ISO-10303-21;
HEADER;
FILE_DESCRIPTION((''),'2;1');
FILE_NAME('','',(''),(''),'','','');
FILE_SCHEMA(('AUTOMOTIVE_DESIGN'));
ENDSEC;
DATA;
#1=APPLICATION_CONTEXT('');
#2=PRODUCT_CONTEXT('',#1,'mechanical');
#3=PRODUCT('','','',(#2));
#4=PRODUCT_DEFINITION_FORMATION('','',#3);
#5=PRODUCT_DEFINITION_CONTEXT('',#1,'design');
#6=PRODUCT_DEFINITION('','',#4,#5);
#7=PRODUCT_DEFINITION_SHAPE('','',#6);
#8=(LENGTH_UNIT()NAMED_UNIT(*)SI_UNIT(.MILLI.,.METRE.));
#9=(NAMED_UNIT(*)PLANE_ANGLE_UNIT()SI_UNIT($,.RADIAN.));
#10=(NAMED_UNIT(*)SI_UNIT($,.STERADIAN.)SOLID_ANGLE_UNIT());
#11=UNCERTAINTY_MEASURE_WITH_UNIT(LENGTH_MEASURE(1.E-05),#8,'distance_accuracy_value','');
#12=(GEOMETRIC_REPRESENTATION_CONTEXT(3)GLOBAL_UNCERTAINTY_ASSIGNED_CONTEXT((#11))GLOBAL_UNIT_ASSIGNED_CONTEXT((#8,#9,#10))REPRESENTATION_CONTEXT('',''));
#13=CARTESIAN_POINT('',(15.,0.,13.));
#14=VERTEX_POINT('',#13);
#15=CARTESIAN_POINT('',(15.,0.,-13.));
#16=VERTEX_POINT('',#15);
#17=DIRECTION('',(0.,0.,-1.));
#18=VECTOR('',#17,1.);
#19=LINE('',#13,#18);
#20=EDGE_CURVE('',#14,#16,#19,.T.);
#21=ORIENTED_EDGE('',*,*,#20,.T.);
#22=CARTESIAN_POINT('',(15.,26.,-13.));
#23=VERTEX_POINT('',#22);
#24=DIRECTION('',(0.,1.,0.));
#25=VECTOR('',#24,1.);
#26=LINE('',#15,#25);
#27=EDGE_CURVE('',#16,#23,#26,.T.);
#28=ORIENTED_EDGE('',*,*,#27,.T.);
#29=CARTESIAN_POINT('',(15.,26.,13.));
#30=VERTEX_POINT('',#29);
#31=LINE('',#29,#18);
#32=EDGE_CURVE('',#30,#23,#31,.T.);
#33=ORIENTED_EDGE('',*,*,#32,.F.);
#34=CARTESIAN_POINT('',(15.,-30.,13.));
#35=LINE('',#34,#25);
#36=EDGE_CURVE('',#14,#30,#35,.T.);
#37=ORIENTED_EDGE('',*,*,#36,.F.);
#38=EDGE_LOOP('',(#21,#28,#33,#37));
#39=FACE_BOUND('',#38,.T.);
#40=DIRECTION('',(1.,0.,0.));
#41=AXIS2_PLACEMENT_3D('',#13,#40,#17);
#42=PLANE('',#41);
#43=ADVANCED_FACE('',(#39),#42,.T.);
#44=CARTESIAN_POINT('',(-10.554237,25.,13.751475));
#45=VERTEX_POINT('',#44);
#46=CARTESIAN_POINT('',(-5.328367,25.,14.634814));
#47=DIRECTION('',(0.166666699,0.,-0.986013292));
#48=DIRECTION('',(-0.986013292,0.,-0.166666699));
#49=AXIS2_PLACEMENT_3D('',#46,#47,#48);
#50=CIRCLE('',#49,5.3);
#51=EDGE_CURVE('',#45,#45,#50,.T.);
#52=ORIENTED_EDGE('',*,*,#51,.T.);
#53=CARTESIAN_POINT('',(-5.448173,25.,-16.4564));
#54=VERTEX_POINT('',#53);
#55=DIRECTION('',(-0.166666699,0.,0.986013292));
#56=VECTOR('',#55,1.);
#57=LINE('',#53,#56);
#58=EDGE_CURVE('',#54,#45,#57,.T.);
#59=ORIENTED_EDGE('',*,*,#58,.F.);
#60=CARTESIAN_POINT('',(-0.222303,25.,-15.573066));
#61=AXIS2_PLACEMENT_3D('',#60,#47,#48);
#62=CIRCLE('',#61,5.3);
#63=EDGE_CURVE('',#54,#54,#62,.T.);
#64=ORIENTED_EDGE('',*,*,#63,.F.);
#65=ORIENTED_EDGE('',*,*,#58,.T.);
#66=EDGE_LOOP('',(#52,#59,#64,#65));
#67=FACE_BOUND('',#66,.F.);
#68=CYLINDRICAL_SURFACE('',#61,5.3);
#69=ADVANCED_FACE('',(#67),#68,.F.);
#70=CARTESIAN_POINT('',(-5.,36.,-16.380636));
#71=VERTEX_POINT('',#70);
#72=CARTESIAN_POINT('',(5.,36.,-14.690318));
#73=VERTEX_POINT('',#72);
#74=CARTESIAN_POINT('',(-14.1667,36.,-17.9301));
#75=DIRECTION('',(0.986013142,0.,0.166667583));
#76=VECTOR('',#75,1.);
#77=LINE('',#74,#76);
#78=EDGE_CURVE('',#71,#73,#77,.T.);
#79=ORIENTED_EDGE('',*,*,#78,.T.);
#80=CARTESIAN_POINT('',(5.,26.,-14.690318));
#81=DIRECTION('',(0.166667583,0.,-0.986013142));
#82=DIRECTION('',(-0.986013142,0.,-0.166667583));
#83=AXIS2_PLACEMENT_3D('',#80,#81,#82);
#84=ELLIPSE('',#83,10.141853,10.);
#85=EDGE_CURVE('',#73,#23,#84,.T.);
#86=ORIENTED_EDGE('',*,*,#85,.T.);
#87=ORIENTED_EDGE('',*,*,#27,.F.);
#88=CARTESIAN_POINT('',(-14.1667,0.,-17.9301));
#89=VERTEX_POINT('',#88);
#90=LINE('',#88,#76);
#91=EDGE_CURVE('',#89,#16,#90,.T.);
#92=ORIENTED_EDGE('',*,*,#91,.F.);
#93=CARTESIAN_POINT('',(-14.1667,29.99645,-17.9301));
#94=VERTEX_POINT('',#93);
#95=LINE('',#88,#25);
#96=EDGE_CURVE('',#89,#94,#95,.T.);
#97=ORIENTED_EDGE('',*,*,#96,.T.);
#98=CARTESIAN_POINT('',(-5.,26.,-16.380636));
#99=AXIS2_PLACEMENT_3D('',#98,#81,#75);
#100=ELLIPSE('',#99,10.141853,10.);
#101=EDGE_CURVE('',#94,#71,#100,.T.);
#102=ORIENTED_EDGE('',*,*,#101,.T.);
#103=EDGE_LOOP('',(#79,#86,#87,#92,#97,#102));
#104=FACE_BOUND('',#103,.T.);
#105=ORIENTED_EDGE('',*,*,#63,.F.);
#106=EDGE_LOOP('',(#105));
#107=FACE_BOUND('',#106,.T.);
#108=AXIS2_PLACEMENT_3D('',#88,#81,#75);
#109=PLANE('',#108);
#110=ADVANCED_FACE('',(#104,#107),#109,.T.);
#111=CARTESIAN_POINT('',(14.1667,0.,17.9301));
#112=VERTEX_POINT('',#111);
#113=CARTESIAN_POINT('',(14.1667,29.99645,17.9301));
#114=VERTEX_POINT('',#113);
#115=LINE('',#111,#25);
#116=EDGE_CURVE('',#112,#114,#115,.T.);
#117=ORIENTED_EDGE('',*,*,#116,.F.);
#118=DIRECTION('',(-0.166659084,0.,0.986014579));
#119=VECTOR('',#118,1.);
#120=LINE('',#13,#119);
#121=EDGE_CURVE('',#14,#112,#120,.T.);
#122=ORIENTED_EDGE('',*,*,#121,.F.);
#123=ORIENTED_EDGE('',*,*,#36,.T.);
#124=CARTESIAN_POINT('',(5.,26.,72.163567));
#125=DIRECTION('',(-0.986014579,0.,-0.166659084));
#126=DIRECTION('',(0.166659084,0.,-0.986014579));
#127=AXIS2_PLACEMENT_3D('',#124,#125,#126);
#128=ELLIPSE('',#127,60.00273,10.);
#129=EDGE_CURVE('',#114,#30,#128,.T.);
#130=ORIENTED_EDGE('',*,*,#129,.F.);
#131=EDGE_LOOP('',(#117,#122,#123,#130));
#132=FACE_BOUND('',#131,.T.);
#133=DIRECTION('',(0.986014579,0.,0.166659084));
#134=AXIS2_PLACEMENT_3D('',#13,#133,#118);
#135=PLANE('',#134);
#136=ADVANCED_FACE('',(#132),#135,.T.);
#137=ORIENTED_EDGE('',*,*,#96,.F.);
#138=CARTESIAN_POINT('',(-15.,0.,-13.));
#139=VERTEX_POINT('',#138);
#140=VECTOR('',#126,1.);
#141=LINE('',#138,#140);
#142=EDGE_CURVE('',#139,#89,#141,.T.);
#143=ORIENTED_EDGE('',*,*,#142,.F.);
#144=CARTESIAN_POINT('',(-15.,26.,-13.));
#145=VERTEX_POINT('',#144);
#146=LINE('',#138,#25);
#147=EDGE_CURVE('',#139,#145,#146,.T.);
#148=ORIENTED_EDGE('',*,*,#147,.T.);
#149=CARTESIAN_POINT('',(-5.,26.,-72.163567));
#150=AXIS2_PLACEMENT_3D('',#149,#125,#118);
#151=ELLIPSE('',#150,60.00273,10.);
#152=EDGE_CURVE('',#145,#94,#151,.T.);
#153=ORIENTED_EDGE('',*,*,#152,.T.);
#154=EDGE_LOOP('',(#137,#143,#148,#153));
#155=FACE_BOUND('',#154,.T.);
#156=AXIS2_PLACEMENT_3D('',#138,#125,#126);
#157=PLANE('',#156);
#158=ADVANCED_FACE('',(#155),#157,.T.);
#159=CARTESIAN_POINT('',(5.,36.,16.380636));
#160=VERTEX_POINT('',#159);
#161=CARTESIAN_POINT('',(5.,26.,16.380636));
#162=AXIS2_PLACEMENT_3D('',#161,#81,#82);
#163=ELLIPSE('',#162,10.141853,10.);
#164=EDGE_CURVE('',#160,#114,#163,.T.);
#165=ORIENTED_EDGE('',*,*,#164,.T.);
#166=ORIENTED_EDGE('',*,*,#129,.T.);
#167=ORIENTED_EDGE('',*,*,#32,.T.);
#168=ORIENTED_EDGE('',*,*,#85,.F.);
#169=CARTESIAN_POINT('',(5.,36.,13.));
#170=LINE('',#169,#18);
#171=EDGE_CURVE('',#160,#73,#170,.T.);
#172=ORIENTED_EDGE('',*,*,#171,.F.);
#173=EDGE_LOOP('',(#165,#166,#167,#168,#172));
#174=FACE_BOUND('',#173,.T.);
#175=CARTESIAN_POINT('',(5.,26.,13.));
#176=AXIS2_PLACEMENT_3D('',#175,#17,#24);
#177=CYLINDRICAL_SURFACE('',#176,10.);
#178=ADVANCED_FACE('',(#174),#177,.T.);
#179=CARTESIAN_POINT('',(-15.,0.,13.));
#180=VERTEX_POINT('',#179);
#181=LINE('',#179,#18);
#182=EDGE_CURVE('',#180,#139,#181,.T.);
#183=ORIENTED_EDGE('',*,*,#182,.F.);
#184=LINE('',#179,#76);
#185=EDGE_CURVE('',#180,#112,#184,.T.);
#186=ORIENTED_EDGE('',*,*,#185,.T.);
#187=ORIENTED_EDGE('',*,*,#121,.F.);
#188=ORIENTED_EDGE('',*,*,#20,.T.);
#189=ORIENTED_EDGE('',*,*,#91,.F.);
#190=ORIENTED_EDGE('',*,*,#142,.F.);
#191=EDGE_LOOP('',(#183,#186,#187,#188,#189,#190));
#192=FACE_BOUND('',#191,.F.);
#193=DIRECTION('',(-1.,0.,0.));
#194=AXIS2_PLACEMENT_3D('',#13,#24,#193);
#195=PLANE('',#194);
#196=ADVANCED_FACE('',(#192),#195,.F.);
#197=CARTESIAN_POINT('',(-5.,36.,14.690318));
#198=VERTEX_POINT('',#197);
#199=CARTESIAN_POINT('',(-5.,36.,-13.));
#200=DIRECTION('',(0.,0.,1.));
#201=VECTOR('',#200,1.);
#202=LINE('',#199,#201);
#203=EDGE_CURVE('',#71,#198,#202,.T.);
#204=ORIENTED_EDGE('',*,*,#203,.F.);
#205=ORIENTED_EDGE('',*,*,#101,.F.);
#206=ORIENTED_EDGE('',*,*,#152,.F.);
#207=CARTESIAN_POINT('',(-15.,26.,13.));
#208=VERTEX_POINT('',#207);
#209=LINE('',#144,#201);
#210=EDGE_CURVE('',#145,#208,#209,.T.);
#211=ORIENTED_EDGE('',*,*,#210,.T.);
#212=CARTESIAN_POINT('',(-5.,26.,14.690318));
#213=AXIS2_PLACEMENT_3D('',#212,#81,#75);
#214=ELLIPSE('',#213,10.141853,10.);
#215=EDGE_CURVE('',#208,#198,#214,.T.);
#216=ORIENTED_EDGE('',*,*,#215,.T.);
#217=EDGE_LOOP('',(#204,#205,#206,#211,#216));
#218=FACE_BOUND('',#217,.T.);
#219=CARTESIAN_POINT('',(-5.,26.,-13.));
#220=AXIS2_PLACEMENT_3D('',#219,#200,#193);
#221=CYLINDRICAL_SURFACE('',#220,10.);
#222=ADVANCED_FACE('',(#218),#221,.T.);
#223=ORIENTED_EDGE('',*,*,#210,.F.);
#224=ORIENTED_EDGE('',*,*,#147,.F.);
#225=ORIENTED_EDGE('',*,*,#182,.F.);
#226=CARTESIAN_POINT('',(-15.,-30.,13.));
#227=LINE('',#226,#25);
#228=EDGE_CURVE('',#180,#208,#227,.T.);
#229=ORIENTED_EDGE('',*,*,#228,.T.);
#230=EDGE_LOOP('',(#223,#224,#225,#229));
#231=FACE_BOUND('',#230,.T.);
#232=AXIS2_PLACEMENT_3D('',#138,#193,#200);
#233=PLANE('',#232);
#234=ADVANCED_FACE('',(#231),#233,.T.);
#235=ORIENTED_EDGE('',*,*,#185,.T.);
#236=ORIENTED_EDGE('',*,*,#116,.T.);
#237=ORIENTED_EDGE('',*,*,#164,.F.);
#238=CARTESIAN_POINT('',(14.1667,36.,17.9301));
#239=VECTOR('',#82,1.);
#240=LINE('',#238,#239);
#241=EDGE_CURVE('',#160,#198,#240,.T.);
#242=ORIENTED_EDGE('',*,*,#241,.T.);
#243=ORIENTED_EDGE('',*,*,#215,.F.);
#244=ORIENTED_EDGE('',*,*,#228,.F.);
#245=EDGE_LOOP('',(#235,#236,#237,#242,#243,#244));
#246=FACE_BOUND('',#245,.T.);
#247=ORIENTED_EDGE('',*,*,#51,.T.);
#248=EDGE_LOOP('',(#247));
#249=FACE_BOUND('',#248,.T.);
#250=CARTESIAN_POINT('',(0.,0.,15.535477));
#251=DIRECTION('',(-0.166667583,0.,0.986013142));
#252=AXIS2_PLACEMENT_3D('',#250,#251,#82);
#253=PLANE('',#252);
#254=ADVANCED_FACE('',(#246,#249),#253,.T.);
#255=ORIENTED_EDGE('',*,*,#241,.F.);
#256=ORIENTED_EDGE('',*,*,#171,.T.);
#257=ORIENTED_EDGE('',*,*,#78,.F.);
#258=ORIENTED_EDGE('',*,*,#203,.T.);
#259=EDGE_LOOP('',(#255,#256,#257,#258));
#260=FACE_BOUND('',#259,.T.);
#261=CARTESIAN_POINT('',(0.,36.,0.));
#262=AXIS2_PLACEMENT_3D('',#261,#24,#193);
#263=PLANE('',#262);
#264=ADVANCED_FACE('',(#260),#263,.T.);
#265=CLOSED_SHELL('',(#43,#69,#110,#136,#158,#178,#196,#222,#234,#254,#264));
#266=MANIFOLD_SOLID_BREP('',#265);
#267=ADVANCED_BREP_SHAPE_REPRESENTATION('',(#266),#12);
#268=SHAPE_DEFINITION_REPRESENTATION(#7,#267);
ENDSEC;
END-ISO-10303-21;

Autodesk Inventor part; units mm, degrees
ref_plane "YZ Plane" through (0, 0, 0) normal (1, 0, 0) x (0, 1, 0)
ref_plane "XZ Plane" through (0, 0, 0) normal (0, 1, 0) x (-1, 0, 0)
ref_plane "XY Plane" through (0, 0, 0) normal (0, 0, 1) x (1, 0, 0)
sketch "BaseSC" plane through (0, 0, 0) normal (0, 1, 0) x (-1, 0, 0)
  line L0 (15, 13) -> (-15, 13)
  line L1 (-15, 13) -> (-15, -13)
  line L2 (-15, -13) -> (15, -13)
  line L3 (15, -13) -> (15, 13)
  line L4 (15, 13) -> (-15, -13) construction
  line L5 (-15, 13) -> (15, -13) construction
  line L6 (15, 13) -> (14.1667, 17.9301)
  line L7 (14.1667, 17.9301) -> (-15, 13)
  line L8 (0, 0) -> (8.3423, 0)
  line L9 (15, -13) -> (14.1667, -17.9301)
  line L10 (14.1667, -17.9301) -> (-15, -13)
  line L11 (-15, 13) -> (-14.1667, 17.9301)
  line L12 (-14.1667, 17.9301) -> (15, 13)
  dimension "d0" = 30
  dimension "d1" = 26
  dimension "d9" = 5
  dimension "d10" = 90
  dimension "d17" = 5
  dimension "d18" = 90
sketch "スケッチ2" plane through (0, 0, 0) normal (0, 0, 1) x (1, 0, 0)
  point P0 (0, 0)
extrude "押し出し1" add sketch "BaseSC" against normal blind 30 contours L3 L2 L1 L0
sketch "スケッチ3" plane through (15, 0, 13) normal (1, 0, 0) x (0, 0, -1)
  line L0 (2.5, -1.5742) -> (23.5, -1.5742)
  line L1 (23.5, -1.5742) -> (23.5, -28.5742)
  line L2 (23.5, -28.5742) -> (2.5, -28.5742)
  line L3 (2.5, -28.5742) -> (2.5, -1.5742)
  line L4 (2.5, -1.5742) -> (23.5, -28.5742) construction
  line L5 (23.5, -1.5742) -> (2.5, -28.5742) construction
  ellipse E0 centre (13, -15.0742) end of major axis (23.5, -15.0742) minor radius 13.5
  point P0 (13, 0)
  dimension "d5" = 21
  dimension "d6" = 27
extrude "押し出し2" cut sketch "スケッチ3" against normal through all contours E0
extrude "押し出し3" add sketch "BaseSC" along normal blind 36 contours L3 L2 L1 L0 | L9 L10 L2
extrude "押し出し5" add sketch "BaseSC" along normal blind 36 contours L0 L7 L12 | L11 L12 L7
sketch "スケッチ5" plane through (-14.1667, 0, -17.9301) normal (0.1666667, 0, -0.9860133) x (-0.9860133, 0, -0.1666667)
  circle A0 centre (-14.1422, 25) radius 5.3
  line L0 (-29.5804, 0) -> (0, 0) projected
  point P0 (-16.9569, 0)
  dimension "d21" = 10.6
  dimension "d22" = 25
extrude "押し出し6" cut sketch "スケッチ5" against normal through all
sketch "スケッチ6" plane through (0, -30, 0) normal (0, -1, 0) x (1, 0, 0)
  line L0 (15, -1) -> (-15, -1)
  line L1 (-15, -1) -> (-15, 1)
  line L2 (-15, 1) -> (15, 1)
  line L3 (15, 1) -> (15, -1)
  line L4 (15, -1) -> (-15, 1) construction
  line L5 (-15, -1) -> (15, 1) construction
  point P0 (0, 0)
  dimension "d25" = 30
  dimension "d26" = 2
extrude "押し出し7" cut sketch "スケッチ6" against normal blind 5
fillet "フィレット1" radius 10 2 edges at (15, 36, 0) (-15, 36, 0)
sketch "スケッチ7" plane through (-15, -30, 13) normal (0, 0, 1) x (1, 0, 0)
  line L0 (30, 30) -> (0, 30) projected
  line L1 (0, 0) -> (0, 30) projected
  line L2 (30, 0) -> (0, 0) projected
  line L3 (30, 30) -> (30, 0) projected
  point P0 (15, 30)
extrude "押し出し8" cut sketch "スケッチ7" against normal through all
properties part number "default"
